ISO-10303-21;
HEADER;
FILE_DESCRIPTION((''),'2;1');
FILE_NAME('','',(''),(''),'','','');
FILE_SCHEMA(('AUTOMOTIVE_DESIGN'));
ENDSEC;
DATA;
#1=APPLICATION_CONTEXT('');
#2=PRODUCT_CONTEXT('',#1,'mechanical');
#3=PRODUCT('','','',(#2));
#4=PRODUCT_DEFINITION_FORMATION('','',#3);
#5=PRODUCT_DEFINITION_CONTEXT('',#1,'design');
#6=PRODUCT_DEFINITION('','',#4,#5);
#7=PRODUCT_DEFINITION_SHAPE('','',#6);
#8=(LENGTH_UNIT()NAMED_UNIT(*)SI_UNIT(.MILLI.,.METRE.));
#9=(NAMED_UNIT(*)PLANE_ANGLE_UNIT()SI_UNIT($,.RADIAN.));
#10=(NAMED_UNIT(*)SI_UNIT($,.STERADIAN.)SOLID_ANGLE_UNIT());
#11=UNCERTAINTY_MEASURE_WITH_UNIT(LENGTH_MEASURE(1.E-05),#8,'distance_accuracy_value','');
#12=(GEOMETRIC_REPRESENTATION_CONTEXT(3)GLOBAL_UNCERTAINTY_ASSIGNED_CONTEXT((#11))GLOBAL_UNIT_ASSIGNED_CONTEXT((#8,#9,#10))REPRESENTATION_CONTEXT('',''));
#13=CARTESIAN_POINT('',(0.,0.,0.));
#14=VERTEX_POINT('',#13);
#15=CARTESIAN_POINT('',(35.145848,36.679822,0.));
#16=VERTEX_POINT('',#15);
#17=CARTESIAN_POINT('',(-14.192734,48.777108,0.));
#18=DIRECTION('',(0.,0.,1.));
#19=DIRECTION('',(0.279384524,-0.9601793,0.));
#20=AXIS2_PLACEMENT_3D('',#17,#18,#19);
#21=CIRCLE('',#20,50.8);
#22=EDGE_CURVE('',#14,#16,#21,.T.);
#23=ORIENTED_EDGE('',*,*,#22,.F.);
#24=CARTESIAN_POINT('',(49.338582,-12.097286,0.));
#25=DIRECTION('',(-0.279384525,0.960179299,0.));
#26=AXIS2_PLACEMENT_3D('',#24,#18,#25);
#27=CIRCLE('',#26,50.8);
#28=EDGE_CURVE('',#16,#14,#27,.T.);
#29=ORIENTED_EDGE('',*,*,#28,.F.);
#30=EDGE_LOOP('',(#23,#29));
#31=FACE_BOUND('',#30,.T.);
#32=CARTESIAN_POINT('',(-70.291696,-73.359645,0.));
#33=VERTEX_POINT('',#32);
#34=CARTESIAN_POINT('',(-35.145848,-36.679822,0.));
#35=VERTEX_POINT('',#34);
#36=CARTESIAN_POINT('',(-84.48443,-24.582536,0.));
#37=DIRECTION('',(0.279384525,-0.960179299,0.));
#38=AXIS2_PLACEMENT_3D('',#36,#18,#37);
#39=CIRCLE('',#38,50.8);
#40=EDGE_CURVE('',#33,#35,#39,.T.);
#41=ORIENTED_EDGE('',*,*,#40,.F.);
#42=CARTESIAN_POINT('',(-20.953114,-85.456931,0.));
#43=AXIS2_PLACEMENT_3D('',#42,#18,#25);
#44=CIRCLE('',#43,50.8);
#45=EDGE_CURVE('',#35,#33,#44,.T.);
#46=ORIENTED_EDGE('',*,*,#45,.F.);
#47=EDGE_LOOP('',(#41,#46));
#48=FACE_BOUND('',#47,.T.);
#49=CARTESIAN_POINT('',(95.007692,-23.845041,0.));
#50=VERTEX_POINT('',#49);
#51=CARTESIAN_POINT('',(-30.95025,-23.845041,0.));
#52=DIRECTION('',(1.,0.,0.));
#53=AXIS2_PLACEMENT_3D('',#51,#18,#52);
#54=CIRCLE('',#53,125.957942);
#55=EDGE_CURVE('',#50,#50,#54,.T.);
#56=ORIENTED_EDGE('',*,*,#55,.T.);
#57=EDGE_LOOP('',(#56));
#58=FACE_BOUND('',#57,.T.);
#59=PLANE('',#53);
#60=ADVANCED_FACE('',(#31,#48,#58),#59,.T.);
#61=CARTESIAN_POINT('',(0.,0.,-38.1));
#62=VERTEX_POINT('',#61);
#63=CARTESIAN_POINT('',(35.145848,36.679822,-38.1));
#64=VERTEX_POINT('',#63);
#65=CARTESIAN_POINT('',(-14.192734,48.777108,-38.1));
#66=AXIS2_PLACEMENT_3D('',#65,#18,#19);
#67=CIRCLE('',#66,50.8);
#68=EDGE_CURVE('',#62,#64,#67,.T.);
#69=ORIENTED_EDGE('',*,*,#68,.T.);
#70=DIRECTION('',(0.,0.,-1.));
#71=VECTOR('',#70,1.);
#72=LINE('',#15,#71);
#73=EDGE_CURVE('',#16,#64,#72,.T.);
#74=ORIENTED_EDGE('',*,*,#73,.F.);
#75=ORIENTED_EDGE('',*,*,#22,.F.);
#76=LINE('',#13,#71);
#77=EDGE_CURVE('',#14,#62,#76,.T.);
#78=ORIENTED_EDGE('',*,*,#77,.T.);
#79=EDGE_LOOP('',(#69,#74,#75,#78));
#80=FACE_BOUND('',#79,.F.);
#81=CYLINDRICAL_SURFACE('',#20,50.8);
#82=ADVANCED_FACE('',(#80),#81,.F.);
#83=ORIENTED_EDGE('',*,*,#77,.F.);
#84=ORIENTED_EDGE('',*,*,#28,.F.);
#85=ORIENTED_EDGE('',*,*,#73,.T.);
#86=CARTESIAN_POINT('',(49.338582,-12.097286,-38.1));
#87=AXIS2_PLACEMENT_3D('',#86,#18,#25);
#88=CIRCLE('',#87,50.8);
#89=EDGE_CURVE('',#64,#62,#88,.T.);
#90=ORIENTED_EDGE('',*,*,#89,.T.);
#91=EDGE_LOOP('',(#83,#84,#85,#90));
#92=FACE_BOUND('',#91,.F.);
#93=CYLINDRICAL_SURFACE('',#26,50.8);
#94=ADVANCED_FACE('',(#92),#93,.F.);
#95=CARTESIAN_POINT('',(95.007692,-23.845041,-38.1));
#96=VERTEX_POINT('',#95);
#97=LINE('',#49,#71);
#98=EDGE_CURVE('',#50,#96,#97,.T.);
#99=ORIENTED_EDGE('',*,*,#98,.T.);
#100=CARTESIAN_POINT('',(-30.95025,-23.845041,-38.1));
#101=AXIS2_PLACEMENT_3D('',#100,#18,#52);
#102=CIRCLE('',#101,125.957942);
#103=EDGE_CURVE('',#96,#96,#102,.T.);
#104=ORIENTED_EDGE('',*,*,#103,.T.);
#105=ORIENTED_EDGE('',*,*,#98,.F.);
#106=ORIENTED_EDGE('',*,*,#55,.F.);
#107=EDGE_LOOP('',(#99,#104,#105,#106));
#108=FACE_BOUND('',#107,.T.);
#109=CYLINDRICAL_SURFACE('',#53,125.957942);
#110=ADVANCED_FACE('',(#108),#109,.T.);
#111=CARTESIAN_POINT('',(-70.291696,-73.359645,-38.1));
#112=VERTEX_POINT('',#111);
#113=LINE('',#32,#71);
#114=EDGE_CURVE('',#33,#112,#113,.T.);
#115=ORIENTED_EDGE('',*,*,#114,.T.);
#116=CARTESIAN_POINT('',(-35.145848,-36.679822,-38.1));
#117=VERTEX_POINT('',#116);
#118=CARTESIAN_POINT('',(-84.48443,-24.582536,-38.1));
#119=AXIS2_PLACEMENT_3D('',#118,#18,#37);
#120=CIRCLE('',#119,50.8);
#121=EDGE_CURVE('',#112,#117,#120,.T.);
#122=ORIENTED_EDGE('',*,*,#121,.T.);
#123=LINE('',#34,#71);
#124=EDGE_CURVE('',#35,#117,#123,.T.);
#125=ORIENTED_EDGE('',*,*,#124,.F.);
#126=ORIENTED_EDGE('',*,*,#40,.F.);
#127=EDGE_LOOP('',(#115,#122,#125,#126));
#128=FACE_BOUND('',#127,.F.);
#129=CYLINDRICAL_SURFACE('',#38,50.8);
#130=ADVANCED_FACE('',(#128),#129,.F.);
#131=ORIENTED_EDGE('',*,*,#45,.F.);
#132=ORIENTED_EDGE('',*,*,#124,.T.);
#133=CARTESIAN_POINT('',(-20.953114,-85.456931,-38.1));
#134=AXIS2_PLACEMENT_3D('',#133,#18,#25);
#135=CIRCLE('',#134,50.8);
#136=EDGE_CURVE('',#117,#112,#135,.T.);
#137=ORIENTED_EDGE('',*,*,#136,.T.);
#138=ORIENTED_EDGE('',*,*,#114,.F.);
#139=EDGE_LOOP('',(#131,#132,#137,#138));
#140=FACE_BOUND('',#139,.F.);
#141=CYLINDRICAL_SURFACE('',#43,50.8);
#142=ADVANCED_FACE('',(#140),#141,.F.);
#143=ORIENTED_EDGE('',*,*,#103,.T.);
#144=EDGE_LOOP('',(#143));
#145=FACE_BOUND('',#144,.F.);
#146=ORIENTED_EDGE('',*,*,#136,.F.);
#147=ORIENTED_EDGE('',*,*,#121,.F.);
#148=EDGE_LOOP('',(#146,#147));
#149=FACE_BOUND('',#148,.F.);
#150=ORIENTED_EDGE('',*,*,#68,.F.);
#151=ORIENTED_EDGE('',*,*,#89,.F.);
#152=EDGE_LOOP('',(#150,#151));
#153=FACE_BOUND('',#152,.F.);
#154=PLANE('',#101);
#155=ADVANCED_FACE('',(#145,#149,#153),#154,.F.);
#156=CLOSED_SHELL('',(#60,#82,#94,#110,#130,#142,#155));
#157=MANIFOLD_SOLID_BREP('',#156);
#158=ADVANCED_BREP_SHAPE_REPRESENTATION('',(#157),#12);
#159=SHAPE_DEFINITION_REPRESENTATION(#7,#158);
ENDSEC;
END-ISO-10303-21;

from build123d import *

# Parameters (mm, degrees)
F0_R     = 125.9579420201
F1_DEPTH = 38.1
F3_DEPTH = 38.101


with BuildPart() as f1:
    # F0 (on Top) → F1 (new body)
    with BuildSketch(Plane.XY):
        with Locations((-30.9502501041, -23.8450411707)):
            Circle(F0_R)
    extrude(amount=-F1_DEPTH)

    # F2 (on Top) → F3 (cut, through all)
    with BuildSketch(Plane.XY):
        with BuildLine():
            ThreePointArc((-6.9e-08, -2.01e-08), (22.4870883881, 13.6312603216), (35.1458480619, 36.6798223007))
            ThreePointArc((35.1458480619, 36.6798223007), (12.6587596337, 23.0485619372), (-1.05e-08, -4.28e-08))
        make_face()
        with BuildLine():
            ThreePointArc((-70.2916961239, -73.3596446013), (-47.8046076956, -59.7283842378), (-35.1458480514, -36.6798222578))
            ThreePointArc((-35.1458480539, -36.6798222983), (-57.632936472, -50.3110826452), (-70.2916961239, -73.3596446013))
        make_face()
    extrude(amount=-F3_DEPTH, mode=Mode.SUBTRACT)


solid = f1.part
